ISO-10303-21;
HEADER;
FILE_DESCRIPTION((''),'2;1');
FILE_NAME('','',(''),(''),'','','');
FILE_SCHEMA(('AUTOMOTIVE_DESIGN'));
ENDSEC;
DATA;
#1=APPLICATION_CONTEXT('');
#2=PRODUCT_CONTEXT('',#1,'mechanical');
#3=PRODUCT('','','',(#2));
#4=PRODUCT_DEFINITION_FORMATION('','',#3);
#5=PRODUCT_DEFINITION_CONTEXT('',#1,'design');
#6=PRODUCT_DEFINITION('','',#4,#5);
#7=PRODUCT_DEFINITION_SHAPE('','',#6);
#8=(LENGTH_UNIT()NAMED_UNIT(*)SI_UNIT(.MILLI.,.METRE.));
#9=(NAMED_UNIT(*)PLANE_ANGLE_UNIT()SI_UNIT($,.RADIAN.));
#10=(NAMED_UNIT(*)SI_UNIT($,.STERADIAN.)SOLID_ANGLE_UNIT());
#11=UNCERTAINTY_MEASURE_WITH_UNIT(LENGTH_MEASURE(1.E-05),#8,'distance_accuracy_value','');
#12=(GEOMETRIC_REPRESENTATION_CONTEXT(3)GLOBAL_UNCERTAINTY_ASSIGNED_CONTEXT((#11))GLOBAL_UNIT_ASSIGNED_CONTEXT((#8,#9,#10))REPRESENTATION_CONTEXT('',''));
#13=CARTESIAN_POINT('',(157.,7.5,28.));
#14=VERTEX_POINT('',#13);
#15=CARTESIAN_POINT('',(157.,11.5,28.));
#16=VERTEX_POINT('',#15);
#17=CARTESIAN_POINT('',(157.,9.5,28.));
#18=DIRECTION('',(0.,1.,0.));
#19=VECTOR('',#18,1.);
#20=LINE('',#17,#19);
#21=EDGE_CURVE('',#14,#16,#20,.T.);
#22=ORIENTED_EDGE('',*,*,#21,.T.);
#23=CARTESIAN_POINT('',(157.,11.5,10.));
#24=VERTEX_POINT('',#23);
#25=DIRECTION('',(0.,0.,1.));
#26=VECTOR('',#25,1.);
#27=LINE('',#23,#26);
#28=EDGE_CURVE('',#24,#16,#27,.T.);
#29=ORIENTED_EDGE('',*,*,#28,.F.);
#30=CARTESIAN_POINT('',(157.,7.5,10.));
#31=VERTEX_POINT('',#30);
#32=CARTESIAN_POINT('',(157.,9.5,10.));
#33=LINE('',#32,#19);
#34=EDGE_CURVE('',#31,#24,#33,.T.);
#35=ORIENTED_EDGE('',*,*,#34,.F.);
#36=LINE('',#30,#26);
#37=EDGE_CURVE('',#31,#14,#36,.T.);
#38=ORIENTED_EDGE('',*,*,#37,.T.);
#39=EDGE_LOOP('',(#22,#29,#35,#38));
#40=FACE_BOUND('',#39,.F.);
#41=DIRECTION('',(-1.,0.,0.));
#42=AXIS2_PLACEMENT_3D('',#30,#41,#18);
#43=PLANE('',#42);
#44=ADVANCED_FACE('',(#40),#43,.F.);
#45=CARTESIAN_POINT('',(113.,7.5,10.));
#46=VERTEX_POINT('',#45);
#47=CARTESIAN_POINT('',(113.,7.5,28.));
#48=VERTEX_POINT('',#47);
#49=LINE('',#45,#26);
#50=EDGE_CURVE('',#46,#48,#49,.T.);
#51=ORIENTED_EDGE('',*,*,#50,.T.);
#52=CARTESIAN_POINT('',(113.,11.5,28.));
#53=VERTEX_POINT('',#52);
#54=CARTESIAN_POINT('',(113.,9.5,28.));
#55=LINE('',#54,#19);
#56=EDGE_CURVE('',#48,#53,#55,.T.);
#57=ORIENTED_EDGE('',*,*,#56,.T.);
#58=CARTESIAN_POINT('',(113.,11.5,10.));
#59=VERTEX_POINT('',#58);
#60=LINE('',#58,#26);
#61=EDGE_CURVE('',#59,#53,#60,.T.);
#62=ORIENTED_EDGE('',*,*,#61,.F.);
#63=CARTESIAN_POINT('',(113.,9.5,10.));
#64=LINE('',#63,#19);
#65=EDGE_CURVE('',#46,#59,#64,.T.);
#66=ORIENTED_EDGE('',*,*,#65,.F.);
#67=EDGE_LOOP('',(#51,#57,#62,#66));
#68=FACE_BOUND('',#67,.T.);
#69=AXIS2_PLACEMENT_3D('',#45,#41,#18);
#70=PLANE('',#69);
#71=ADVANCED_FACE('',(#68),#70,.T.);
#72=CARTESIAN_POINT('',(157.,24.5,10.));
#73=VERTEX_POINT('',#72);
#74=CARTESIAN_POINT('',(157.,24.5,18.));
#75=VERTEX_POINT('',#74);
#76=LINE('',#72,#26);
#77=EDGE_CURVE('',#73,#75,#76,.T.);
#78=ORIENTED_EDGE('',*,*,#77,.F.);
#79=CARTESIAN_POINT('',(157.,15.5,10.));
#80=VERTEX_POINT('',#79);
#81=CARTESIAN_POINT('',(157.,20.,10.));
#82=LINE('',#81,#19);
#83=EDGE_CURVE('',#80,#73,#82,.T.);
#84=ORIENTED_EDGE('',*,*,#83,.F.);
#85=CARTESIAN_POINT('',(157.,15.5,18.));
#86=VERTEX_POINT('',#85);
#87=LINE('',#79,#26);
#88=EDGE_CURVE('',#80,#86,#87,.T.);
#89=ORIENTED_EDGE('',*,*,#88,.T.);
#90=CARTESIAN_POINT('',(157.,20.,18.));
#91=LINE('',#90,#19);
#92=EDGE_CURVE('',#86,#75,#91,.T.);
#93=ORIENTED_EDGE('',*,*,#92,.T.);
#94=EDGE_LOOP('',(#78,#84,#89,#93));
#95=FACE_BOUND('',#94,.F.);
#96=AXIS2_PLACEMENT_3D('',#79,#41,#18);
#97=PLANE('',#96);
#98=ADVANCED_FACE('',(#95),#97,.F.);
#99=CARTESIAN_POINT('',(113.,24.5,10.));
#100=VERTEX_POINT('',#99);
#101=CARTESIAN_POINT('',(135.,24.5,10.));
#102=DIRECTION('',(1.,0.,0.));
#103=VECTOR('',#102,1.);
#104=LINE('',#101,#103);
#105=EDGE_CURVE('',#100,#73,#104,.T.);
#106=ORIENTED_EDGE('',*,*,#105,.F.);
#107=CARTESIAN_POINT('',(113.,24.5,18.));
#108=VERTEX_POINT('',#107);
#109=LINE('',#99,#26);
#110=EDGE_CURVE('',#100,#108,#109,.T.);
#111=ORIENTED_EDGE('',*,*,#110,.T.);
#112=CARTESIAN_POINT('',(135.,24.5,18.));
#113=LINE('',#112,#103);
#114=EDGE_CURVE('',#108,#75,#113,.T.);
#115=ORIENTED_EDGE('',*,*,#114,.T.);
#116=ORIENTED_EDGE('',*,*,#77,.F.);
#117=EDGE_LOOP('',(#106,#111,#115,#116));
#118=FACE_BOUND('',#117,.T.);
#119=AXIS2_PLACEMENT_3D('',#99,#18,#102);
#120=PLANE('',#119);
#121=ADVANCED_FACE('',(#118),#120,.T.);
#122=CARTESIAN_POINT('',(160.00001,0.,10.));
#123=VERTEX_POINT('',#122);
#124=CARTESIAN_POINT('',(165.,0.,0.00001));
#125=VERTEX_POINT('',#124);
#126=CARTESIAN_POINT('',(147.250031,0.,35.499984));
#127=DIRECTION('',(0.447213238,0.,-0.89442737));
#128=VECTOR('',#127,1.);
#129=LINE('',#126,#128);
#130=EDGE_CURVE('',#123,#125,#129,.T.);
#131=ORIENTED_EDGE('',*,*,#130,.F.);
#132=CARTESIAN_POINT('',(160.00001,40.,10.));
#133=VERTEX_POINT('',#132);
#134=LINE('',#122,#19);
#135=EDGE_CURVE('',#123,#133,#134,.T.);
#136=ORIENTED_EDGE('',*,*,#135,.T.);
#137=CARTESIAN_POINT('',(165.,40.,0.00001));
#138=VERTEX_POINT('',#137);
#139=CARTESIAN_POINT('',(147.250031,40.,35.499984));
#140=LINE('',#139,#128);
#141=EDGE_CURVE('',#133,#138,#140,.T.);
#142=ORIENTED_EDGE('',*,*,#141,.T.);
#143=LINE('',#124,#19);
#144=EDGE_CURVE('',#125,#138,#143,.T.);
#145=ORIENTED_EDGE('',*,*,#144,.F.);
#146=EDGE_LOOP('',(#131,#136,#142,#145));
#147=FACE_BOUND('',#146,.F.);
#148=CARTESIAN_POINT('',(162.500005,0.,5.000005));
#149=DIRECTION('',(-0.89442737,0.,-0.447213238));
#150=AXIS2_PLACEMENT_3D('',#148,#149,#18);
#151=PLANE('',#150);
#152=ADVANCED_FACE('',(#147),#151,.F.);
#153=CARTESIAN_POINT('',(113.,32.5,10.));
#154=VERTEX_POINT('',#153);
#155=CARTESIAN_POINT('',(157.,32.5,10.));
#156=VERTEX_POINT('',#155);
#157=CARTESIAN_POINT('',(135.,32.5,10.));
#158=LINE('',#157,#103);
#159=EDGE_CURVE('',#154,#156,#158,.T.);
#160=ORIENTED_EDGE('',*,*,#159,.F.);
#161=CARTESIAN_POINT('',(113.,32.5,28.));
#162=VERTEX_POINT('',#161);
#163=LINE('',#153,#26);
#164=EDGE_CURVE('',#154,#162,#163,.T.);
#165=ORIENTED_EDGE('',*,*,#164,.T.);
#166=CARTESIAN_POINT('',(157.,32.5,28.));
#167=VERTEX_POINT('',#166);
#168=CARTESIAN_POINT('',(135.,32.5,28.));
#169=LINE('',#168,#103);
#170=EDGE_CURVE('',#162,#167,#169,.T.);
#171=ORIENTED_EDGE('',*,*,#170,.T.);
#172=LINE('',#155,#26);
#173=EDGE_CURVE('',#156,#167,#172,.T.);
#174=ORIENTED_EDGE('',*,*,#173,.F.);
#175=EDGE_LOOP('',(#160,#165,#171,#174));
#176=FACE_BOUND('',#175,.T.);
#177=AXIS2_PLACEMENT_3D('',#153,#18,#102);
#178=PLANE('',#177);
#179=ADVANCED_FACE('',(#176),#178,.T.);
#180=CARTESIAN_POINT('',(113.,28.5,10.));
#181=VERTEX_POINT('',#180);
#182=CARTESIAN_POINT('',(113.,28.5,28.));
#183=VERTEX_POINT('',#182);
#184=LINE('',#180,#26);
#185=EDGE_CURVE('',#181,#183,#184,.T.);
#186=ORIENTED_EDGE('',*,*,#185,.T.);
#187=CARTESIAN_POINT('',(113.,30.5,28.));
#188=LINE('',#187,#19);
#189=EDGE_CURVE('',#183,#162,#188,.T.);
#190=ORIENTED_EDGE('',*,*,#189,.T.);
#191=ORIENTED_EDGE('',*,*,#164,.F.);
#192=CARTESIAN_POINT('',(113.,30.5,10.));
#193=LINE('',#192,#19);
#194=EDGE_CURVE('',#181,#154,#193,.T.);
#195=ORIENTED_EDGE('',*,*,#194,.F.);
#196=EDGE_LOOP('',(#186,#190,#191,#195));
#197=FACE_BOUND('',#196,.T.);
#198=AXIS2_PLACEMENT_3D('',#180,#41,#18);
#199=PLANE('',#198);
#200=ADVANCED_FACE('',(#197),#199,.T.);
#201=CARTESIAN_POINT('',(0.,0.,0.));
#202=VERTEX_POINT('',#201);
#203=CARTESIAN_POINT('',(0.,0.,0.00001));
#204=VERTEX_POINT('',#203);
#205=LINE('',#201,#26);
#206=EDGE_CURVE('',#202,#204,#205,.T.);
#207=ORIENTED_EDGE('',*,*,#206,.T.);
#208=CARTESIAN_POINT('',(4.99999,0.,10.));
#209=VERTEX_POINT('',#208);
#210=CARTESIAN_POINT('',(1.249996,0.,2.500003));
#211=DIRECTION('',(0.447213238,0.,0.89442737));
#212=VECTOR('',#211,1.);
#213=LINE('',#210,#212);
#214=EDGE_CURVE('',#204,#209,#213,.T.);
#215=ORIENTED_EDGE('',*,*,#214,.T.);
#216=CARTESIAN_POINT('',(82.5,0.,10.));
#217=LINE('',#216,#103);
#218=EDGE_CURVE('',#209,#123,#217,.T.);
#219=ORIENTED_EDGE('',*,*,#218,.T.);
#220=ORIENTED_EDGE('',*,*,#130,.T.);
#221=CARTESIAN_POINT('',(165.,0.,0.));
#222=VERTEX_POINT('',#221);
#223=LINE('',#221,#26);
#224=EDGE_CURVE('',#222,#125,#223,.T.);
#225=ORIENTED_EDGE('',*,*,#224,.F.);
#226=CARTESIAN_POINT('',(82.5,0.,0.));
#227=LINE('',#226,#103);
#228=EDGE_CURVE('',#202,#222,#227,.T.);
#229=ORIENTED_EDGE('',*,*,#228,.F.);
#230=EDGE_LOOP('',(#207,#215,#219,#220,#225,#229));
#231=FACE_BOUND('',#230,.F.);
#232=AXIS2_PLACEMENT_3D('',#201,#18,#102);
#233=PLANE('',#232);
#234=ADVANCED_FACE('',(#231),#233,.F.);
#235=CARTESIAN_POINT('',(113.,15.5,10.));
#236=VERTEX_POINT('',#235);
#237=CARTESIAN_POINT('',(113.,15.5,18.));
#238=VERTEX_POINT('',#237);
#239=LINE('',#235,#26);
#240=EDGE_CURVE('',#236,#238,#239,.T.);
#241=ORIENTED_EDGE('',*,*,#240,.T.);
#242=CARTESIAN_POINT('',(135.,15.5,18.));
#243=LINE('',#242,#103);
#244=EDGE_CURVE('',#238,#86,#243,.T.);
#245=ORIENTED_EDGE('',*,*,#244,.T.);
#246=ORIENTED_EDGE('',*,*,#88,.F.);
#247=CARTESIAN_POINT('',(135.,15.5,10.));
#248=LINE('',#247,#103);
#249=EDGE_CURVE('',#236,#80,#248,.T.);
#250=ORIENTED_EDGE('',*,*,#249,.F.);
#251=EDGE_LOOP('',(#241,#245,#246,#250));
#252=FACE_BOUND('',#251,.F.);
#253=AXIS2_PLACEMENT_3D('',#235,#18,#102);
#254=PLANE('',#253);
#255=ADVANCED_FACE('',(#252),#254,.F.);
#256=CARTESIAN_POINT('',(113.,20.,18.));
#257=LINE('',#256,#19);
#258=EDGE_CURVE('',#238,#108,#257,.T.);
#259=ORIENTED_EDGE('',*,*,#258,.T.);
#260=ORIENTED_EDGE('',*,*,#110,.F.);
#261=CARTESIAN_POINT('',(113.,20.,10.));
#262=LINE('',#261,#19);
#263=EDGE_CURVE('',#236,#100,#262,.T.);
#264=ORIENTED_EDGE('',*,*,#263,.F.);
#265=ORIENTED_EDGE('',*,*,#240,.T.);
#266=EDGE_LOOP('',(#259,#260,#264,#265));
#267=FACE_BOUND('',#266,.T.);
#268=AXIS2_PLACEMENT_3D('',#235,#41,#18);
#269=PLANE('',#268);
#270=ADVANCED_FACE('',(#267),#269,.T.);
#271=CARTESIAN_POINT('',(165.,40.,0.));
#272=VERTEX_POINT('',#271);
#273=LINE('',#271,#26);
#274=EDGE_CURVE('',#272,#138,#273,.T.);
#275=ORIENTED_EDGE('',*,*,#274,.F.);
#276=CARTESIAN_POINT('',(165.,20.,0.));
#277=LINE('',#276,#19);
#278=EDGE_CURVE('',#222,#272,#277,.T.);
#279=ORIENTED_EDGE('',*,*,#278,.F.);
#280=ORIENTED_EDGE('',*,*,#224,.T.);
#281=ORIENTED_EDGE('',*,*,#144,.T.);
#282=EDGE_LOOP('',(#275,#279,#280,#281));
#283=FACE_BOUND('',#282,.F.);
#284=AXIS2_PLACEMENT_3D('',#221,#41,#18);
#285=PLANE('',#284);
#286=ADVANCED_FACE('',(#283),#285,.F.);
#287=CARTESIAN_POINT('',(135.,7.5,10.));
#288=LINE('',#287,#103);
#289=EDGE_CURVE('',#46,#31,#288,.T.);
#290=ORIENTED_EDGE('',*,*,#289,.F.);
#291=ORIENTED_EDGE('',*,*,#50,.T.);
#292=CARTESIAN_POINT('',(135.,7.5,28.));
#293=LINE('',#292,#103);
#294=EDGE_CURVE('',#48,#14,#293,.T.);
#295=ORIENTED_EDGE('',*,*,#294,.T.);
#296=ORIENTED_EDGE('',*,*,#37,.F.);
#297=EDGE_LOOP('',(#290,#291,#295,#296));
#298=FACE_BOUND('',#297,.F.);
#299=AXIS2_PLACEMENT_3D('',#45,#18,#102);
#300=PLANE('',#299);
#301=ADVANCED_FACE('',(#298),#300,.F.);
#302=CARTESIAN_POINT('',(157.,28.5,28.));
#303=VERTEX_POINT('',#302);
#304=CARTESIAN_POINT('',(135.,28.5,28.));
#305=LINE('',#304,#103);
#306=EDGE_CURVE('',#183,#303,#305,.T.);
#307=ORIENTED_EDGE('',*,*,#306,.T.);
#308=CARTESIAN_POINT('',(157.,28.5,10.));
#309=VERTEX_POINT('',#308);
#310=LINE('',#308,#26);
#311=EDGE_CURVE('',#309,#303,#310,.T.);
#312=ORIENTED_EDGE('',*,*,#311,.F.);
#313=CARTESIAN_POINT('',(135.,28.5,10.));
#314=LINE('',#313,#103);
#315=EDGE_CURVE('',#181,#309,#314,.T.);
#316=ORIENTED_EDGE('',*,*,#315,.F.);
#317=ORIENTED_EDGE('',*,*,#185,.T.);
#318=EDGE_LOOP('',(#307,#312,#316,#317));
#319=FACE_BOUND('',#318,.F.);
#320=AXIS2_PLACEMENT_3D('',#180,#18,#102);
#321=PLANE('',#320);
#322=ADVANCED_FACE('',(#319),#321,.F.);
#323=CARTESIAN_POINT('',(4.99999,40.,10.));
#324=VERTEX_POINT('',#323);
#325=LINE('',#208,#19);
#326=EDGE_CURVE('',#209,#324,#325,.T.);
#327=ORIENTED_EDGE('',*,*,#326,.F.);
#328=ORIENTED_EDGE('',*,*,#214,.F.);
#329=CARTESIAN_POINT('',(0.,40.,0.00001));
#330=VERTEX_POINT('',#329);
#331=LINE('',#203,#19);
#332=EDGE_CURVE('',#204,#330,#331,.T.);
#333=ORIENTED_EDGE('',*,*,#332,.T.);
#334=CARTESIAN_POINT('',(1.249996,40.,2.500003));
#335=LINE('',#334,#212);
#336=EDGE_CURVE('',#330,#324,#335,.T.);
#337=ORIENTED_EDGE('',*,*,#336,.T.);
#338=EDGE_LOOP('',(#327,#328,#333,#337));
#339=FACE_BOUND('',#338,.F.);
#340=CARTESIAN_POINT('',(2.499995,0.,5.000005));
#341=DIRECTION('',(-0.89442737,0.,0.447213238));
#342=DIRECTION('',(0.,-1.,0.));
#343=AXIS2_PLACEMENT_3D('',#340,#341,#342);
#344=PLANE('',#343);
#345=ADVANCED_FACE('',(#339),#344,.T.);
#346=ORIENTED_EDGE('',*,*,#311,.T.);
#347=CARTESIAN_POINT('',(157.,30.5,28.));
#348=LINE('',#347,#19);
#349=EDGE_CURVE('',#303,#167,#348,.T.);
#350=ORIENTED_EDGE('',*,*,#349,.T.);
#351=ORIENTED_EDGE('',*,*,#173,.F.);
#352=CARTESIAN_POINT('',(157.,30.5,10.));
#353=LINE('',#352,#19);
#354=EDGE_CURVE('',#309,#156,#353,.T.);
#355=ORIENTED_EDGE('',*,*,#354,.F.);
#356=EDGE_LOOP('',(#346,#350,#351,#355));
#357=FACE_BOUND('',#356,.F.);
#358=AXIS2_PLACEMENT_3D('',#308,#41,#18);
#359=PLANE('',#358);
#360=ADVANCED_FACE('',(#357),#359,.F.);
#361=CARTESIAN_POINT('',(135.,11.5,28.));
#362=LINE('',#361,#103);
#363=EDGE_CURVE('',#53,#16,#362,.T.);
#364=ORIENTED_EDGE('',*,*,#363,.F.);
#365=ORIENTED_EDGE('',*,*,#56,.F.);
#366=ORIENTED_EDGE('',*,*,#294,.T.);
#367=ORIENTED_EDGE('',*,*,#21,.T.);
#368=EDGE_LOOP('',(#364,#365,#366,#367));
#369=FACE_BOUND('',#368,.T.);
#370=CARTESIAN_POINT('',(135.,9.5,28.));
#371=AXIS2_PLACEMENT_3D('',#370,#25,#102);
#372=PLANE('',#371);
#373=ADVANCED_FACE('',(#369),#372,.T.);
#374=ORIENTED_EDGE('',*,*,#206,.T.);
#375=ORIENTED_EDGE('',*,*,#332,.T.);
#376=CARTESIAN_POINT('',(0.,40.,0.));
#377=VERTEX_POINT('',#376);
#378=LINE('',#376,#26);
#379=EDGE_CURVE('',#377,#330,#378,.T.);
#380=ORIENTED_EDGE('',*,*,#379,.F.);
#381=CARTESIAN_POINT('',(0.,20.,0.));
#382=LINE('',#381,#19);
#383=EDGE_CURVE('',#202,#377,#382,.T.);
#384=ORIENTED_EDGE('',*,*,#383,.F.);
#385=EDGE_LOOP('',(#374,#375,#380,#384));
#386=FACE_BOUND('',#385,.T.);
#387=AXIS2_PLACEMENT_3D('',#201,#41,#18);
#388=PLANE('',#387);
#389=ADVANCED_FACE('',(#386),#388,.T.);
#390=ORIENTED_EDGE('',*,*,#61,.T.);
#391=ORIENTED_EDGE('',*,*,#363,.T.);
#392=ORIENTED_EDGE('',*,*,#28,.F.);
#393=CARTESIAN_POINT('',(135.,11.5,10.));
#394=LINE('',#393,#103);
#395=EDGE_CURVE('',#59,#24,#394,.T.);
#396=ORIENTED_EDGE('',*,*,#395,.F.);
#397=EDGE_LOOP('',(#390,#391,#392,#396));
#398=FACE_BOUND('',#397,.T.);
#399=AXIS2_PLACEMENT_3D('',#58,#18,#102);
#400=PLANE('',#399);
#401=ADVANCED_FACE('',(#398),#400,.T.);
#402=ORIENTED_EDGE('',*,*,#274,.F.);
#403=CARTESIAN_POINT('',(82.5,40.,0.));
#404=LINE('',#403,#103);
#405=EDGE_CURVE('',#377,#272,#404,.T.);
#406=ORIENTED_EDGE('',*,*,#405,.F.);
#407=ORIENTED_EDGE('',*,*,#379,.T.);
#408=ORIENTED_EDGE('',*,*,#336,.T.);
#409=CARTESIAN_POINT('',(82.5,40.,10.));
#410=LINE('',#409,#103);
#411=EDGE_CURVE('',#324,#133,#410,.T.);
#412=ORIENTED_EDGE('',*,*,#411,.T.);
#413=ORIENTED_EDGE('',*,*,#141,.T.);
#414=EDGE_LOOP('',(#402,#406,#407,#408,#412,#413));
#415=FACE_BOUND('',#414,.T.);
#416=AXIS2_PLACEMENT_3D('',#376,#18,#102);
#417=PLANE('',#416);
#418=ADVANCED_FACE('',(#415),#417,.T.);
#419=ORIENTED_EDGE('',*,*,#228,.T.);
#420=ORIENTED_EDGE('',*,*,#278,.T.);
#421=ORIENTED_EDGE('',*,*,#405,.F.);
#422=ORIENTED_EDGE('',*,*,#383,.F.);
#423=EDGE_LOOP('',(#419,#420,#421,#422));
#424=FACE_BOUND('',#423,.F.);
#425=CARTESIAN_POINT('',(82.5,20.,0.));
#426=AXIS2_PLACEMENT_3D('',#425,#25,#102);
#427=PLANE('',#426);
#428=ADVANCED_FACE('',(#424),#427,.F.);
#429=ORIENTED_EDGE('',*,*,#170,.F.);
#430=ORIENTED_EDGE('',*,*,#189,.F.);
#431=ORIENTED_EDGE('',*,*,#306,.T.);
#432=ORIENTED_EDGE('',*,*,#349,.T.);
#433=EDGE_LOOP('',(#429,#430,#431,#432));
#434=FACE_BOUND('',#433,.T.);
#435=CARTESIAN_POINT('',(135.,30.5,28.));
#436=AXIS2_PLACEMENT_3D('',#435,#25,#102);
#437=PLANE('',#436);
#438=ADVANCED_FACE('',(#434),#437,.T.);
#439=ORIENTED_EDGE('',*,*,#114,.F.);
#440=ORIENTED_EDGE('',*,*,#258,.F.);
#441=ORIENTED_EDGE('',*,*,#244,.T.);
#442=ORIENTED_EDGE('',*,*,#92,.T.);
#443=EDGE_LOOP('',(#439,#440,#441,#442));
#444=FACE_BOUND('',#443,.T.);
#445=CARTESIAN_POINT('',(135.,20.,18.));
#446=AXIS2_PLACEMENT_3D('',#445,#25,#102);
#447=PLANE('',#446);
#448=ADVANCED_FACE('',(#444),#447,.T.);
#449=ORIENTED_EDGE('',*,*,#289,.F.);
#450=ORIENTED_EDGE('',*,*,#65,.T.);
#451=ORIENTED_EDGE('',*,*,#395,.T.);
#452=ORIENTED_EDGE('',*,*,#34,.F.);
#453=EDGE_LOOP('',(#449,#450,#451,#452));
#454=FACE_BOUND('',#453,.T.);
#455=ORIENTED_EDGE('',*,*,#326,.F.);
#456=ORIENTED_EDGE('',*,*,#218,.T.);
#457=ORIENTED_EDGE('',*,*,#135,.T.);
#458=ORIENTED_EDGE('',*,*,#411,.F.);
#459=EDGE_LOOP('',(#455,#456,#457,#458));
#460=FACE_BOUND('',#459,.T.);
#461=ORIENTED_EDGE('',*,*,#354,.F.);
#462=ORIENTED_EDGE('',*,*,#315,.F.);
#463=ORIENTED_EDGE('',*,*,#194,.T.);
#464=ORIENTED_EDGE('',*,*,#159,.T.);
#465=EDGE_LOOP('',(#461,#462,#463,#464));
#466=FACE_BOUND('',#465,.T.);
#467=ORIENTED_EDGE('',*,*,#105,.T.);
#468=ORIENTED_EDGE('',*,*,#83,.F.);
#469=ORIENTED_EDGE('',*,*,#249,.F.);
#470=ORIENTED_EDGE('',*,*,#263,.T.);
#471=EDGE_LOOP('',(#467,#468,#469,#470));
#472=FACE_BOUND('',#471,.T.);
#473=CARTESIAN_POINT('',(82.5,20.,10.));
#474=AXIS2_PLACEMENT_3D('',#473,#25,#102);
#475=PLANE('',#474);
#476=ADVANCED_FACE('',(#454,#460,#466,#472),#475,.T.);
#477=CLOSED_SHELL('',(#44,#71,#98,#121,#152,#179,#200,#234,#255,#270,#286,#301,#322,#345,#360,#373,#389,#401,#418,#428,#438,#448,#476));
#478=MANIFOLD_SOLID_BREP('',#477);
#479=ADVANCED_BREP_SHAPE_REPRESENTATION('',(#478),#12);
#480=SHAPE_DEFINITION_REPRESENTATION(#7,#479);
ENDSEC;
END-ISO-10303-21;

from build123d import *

# Parameters (mm, degrees)
F0_W     = 165
F0_H     = 40
F1_DEPTH = 10
F2_SIZE2 = 9.99999
F2_SIZE  = 4.99999
F3_SIZE2 = 4.99999
F3_SIZE  = 9.99999
F4_W     = 44
F4_H     = 4
F5_DEPTH = 18
F4_H_2   = 9
F6_DEPTH = 8


# Not quite as in the source:
# - a fillet or chamfer is up to 0.001 mm smaller than in the source, because OpenCascade refuses the exact size


with BuildPart() as f1:
    # F0 (on Top) → F1 (new body)
    with BuildSketch(Plane.XY):
        with Locations((82.5, 20)):
            Rectangle(F0_W, F0_H)
    extrude(amount=F1_DEPTH)

    # F2 (size 5 and 10 in the source; OpenCascade refuses exactly that, so slightly less here)
    f2_edges = [f1.edges().sort_by_distance(p)[0] for p in [
        (165, 20, 10),
    ]]
    f2_side = f1.faces().sort_by_distance((82.5, 20, 10))[0]
    chamfer(f2_edges, length=F2_SIZE, length2=F2_SIZE2, reference=f2_side)

    # F3 (size 10 and 5 in the source; OpenCascade refuses exactly that, so slightly less here)
    f3_edges = [f1.edges().sort_by_distance(p)[0] for p in [
        (0, 20, 10),
    ]]
    f3_side = f1.faces().sort_by_distance((0, 20, 5))[0]
    chamfer(f3_edges, length=F3_SIZE, length2=F3_SIZE2, reference=f3_side)

    # F4 (on face) → F5 (join)
    with BuildSketch(Plane.XY.offset(10)):
        with Locations((135, 30.5)):
            Rectangle(F4_W, F4_H)
        with Locations((135, 9.5)):
            Rectangle(F4_W, F4_H)
    extrude(amount=F5_DEPTH)

    # F4 (on face) → F6 (join)
    with BuildSketch(Plane.XY.offset(10)):
        with Locations((135, 20)):
            Rectangle(F4_W, F4_H_2)
    extrude(amount=F6_DEPTH)


solid = f1.part
